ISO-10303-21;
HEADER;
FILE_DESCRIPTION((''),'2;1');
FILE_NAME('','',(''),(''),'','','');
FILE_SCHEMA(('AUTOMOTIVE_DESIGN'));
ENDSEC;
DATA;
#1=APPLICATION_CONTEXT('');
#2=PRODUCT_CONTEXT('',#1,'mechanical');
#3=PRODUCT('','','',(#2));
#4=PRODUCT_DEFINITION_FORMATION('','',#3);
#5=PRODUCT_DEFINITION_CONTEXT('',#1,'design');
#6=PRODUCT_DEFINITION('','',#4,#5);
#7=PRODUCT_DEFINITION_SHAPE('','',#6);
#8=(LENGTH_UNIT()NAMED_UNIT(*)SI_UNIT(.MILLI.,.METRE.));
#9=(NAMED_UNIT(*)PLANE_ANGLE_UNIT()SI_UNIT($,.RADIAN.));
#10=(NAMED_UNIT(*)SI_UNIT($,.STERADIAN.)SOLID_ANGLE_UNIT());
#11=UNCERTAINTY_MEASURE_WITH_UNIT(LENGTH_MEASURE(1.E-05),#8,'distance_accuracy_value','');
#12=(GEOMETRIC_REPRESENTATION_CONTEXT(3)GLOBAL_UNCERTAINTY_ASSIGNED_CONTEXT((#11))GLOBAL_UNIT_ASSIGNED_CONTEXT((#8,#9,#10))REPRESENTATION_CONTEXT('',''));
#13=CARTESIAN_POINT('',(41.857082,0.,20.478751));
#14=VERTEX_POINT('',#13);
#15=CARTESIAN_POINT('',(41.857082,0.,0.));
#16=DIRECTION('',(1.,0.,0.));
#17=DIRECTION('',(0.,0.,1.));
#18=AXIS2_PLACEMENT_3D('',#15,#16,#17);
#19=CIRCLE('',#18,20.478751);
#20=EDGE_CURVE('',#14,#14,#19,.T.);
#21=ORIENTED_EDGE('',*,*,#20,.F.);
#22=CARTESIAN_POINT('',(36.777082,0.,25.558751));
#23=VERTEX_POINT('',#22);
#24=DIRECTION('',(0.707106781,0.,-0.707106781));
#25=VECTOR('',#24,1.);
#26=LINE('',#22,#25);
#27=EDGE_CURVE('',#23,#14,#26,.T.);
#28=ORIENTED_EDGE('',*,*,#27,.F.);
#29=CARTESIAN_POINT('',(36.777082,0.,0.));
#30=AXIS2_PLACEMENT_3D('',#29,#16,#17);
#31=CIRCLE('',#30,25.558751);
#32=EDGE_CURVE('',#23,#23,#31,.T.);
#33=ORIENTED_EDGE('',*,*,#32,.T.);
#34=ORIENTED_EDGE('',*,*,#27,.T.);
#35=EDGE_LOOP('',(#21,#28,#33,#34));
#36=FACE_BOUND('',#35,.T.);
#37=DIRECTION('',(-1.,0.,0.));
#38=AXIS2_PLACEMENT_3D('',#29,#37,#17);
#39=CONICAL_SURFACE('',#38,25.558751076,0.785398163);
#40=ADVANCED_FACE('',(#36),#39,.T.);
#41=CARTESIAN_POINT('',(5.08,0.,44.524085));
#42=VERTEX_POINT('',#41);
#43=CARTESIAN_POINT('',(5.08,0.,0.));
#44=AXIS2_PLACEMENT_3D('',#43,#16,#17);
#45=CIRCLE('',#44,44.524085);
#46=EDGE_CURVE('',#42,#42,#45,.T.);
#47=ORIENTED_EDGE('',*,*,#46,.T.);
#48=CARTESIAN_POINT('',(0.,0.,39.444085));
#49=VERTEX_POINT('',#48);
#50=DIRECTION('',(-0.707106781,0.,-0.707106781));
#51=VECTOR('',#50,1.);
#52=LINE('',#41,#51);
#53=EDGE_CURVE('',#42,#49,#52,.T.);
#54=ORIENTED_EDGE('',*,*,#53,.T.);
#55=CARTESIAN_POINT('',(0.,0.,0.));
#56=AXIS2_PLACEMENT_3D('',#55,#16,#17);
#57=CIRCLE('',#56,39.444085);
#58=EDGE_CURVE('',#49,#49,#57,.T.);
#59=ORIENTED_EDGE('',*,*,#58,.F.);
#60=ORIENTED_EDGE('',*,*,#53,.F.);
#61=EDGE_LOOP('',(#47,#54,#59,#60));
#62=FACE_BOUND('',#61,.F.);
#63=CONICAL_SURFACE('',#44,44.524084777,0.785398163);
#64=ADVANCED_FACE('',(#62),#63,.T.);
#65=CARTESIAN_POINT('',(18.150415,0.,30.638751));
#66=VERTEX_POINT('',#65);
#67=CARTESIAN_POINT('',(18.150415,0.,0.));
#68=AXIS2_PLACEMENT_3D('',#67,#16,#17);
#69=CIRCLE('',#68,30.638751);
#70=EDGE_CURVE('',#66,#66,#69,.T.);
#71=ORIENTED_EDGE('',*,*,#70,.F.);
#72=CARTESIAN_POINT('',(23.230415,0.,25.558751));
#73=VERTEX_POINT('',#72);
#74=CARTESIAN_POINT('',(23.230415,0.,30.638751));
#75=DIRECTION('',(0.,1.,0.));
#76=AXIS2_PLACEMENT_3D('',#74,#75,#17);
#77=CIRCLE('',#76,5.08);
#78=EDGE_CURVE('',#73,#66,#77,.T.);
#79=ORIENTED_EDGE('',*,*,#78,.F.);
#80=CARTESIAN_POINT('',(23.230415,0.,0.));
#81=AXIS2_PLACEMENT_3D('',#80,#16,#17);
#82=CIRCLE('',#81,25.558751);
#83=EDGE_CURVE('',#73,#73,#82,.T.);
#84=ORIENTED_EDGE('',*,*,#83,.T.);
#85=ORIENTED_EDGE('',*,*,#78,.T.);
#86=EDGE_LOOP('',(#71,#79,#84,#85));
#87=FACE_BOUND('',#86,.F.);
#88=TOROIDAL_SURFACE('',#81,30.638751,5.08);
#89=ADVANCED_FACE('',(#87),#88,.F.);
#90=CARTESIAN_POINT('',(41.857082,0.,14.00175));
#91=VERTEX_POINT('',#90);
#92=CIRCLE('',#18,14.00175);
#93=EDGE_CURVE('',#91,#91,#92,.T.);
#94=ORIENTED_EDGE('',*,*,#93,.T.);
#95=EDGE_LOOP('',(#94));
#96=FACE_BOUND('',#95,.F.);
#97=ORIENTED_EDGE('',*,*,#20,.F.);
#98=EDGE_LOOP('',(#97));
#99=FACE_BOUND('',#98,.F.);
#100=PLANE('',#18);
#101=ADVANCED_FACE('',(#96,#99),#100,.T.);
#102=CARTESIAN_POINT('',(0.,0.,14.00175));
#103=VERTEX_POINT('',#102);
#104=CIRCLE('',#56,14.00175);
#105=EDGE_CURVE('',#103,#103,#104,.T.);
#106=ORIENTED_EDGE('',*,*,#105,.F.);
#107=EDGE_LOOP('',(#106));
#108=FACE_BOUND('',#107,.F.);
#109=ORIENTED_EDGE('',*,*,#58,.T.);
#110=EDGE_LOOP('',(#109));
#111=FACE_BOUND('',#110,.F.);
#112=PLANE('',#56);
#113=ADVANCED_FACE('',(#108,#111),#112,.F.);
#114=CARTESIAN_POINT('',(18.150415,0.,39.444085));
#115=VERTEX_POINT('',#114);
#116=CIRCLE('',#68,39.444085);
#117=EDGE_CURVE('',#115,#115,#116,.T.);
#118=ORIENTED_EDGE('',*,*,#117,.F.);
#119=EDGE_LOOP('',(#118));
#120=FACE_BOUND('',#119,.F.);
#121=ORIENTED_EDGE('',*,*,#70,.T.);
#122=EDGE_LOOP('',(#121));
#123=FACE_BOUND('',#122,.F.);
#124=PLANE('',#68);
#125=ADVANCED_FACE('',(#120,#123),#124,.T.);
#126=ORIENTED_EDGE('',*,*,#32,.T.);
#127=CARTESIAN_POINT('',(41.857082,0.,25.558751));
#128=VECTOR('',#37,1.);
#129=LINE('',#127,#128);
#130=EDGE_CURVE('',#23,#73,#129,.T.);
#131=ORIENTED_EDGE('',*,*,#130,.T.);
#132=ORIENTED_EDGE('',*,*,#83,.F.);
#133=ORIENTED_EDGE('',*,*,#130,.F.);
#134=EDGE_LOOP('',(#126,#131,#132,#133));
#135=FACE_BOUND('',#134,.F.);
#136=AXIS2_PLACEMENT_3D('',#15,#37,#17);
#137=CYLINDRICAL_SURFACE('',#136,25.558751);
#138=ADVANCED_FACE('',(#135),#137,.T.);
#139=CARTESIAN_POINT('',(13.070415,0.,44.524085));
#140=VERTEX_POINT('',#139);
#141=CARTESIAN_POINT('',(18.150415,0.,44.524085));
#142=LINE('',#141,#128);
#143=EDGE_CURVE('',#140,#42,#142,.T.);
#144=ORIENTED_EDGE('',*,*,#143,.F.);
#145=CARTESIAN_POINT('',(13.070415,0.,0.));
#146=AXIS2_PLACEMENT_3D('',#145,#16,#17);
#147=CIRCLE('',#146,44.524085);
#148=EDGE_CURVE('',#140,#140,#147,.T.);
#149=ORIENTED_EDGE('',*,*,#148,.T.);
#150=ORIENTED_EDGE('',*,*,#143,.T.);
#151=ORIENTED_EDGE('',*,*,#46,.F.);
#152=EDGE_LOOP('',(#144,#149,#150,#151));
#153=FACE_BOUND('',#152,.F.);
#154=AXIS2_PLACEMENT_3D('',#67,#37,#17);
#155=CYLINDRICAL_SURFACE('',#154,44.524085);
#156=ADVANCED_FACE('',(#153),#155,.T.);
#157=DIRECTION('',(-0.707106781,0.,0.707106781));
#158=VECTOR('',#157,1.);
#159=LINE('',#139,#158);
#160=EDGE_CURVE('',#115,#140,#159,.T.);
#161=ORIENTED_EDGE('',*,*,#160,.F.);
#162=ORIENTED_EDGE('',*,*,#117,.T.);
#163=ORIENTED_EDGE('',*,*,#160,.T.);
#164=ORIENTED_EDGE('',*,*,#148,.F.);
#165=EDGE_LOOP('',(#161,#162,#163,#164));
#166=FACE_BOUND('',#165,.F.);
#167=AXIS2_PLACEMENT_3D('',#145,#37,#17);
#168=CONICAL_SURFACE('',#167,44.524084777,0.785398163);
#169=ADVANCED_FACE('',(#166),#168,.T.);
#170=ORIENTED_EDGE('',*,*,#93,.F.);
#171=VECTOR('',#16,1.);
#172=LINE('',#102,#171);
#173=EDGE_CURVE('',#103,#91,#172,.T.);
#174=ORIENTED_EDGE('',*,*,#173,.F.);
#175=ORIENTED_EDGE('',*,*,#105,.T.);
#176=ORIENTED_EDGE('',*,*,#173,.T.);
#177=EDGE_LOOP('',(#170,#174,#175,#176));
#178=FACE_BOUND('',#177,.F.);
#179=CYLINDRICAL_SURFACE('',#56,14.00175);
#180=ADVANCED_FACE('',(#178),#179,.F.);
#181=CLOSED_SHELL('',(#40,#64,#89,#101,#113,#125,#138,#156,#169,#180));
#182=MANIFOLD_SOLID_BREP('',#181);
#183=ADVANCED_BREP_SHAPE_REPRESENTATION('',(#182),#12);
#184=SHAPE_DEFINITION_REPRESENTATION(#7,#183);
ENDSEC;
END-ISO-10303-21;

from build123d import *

# Parameters (mm, degrees)
F2_R    = 5.08
F3_SIZE = 5.08


# Not quite as in the source:
# - the program builds the solid bodies; features that only make, move or delete a surface that nothing else refers to are left out


with BuildPart() as f1:
    # F0 (on Front) → F1 (revolve)
    with BuildSketch(Plane.XZ):
        Polygon((18.1504152715, 44.5240847766), (0, 44.5240847766), (0, 14.0017503873), (41.8570823967, 14.0017503873), (41.8570823967, 25.5587510765), (18.1504152715, 25.5587510765), align=None)
    revolve(axis=Axis((21.6693747789, 0, 0), (1, 0, 0)))

    # F2
    f2_edges = [f1.edges().sort_by_distance(p)[0] for p in [
        (18.150415, 0, -25.558751),
    ]]
    fillet(f2_edges, radius=F2_R)

    # F3
    f3_edges = [f1.edges().sort_by_distance(p)[0] for p in [
        (41.857082, 0, -25.558751),
        (18.150415, 0, -44.524085),
        (0, 0, -44.524085),
    ]]
    chamfer(f3_edges, length=F3_SIZE)


solid = f1.part
